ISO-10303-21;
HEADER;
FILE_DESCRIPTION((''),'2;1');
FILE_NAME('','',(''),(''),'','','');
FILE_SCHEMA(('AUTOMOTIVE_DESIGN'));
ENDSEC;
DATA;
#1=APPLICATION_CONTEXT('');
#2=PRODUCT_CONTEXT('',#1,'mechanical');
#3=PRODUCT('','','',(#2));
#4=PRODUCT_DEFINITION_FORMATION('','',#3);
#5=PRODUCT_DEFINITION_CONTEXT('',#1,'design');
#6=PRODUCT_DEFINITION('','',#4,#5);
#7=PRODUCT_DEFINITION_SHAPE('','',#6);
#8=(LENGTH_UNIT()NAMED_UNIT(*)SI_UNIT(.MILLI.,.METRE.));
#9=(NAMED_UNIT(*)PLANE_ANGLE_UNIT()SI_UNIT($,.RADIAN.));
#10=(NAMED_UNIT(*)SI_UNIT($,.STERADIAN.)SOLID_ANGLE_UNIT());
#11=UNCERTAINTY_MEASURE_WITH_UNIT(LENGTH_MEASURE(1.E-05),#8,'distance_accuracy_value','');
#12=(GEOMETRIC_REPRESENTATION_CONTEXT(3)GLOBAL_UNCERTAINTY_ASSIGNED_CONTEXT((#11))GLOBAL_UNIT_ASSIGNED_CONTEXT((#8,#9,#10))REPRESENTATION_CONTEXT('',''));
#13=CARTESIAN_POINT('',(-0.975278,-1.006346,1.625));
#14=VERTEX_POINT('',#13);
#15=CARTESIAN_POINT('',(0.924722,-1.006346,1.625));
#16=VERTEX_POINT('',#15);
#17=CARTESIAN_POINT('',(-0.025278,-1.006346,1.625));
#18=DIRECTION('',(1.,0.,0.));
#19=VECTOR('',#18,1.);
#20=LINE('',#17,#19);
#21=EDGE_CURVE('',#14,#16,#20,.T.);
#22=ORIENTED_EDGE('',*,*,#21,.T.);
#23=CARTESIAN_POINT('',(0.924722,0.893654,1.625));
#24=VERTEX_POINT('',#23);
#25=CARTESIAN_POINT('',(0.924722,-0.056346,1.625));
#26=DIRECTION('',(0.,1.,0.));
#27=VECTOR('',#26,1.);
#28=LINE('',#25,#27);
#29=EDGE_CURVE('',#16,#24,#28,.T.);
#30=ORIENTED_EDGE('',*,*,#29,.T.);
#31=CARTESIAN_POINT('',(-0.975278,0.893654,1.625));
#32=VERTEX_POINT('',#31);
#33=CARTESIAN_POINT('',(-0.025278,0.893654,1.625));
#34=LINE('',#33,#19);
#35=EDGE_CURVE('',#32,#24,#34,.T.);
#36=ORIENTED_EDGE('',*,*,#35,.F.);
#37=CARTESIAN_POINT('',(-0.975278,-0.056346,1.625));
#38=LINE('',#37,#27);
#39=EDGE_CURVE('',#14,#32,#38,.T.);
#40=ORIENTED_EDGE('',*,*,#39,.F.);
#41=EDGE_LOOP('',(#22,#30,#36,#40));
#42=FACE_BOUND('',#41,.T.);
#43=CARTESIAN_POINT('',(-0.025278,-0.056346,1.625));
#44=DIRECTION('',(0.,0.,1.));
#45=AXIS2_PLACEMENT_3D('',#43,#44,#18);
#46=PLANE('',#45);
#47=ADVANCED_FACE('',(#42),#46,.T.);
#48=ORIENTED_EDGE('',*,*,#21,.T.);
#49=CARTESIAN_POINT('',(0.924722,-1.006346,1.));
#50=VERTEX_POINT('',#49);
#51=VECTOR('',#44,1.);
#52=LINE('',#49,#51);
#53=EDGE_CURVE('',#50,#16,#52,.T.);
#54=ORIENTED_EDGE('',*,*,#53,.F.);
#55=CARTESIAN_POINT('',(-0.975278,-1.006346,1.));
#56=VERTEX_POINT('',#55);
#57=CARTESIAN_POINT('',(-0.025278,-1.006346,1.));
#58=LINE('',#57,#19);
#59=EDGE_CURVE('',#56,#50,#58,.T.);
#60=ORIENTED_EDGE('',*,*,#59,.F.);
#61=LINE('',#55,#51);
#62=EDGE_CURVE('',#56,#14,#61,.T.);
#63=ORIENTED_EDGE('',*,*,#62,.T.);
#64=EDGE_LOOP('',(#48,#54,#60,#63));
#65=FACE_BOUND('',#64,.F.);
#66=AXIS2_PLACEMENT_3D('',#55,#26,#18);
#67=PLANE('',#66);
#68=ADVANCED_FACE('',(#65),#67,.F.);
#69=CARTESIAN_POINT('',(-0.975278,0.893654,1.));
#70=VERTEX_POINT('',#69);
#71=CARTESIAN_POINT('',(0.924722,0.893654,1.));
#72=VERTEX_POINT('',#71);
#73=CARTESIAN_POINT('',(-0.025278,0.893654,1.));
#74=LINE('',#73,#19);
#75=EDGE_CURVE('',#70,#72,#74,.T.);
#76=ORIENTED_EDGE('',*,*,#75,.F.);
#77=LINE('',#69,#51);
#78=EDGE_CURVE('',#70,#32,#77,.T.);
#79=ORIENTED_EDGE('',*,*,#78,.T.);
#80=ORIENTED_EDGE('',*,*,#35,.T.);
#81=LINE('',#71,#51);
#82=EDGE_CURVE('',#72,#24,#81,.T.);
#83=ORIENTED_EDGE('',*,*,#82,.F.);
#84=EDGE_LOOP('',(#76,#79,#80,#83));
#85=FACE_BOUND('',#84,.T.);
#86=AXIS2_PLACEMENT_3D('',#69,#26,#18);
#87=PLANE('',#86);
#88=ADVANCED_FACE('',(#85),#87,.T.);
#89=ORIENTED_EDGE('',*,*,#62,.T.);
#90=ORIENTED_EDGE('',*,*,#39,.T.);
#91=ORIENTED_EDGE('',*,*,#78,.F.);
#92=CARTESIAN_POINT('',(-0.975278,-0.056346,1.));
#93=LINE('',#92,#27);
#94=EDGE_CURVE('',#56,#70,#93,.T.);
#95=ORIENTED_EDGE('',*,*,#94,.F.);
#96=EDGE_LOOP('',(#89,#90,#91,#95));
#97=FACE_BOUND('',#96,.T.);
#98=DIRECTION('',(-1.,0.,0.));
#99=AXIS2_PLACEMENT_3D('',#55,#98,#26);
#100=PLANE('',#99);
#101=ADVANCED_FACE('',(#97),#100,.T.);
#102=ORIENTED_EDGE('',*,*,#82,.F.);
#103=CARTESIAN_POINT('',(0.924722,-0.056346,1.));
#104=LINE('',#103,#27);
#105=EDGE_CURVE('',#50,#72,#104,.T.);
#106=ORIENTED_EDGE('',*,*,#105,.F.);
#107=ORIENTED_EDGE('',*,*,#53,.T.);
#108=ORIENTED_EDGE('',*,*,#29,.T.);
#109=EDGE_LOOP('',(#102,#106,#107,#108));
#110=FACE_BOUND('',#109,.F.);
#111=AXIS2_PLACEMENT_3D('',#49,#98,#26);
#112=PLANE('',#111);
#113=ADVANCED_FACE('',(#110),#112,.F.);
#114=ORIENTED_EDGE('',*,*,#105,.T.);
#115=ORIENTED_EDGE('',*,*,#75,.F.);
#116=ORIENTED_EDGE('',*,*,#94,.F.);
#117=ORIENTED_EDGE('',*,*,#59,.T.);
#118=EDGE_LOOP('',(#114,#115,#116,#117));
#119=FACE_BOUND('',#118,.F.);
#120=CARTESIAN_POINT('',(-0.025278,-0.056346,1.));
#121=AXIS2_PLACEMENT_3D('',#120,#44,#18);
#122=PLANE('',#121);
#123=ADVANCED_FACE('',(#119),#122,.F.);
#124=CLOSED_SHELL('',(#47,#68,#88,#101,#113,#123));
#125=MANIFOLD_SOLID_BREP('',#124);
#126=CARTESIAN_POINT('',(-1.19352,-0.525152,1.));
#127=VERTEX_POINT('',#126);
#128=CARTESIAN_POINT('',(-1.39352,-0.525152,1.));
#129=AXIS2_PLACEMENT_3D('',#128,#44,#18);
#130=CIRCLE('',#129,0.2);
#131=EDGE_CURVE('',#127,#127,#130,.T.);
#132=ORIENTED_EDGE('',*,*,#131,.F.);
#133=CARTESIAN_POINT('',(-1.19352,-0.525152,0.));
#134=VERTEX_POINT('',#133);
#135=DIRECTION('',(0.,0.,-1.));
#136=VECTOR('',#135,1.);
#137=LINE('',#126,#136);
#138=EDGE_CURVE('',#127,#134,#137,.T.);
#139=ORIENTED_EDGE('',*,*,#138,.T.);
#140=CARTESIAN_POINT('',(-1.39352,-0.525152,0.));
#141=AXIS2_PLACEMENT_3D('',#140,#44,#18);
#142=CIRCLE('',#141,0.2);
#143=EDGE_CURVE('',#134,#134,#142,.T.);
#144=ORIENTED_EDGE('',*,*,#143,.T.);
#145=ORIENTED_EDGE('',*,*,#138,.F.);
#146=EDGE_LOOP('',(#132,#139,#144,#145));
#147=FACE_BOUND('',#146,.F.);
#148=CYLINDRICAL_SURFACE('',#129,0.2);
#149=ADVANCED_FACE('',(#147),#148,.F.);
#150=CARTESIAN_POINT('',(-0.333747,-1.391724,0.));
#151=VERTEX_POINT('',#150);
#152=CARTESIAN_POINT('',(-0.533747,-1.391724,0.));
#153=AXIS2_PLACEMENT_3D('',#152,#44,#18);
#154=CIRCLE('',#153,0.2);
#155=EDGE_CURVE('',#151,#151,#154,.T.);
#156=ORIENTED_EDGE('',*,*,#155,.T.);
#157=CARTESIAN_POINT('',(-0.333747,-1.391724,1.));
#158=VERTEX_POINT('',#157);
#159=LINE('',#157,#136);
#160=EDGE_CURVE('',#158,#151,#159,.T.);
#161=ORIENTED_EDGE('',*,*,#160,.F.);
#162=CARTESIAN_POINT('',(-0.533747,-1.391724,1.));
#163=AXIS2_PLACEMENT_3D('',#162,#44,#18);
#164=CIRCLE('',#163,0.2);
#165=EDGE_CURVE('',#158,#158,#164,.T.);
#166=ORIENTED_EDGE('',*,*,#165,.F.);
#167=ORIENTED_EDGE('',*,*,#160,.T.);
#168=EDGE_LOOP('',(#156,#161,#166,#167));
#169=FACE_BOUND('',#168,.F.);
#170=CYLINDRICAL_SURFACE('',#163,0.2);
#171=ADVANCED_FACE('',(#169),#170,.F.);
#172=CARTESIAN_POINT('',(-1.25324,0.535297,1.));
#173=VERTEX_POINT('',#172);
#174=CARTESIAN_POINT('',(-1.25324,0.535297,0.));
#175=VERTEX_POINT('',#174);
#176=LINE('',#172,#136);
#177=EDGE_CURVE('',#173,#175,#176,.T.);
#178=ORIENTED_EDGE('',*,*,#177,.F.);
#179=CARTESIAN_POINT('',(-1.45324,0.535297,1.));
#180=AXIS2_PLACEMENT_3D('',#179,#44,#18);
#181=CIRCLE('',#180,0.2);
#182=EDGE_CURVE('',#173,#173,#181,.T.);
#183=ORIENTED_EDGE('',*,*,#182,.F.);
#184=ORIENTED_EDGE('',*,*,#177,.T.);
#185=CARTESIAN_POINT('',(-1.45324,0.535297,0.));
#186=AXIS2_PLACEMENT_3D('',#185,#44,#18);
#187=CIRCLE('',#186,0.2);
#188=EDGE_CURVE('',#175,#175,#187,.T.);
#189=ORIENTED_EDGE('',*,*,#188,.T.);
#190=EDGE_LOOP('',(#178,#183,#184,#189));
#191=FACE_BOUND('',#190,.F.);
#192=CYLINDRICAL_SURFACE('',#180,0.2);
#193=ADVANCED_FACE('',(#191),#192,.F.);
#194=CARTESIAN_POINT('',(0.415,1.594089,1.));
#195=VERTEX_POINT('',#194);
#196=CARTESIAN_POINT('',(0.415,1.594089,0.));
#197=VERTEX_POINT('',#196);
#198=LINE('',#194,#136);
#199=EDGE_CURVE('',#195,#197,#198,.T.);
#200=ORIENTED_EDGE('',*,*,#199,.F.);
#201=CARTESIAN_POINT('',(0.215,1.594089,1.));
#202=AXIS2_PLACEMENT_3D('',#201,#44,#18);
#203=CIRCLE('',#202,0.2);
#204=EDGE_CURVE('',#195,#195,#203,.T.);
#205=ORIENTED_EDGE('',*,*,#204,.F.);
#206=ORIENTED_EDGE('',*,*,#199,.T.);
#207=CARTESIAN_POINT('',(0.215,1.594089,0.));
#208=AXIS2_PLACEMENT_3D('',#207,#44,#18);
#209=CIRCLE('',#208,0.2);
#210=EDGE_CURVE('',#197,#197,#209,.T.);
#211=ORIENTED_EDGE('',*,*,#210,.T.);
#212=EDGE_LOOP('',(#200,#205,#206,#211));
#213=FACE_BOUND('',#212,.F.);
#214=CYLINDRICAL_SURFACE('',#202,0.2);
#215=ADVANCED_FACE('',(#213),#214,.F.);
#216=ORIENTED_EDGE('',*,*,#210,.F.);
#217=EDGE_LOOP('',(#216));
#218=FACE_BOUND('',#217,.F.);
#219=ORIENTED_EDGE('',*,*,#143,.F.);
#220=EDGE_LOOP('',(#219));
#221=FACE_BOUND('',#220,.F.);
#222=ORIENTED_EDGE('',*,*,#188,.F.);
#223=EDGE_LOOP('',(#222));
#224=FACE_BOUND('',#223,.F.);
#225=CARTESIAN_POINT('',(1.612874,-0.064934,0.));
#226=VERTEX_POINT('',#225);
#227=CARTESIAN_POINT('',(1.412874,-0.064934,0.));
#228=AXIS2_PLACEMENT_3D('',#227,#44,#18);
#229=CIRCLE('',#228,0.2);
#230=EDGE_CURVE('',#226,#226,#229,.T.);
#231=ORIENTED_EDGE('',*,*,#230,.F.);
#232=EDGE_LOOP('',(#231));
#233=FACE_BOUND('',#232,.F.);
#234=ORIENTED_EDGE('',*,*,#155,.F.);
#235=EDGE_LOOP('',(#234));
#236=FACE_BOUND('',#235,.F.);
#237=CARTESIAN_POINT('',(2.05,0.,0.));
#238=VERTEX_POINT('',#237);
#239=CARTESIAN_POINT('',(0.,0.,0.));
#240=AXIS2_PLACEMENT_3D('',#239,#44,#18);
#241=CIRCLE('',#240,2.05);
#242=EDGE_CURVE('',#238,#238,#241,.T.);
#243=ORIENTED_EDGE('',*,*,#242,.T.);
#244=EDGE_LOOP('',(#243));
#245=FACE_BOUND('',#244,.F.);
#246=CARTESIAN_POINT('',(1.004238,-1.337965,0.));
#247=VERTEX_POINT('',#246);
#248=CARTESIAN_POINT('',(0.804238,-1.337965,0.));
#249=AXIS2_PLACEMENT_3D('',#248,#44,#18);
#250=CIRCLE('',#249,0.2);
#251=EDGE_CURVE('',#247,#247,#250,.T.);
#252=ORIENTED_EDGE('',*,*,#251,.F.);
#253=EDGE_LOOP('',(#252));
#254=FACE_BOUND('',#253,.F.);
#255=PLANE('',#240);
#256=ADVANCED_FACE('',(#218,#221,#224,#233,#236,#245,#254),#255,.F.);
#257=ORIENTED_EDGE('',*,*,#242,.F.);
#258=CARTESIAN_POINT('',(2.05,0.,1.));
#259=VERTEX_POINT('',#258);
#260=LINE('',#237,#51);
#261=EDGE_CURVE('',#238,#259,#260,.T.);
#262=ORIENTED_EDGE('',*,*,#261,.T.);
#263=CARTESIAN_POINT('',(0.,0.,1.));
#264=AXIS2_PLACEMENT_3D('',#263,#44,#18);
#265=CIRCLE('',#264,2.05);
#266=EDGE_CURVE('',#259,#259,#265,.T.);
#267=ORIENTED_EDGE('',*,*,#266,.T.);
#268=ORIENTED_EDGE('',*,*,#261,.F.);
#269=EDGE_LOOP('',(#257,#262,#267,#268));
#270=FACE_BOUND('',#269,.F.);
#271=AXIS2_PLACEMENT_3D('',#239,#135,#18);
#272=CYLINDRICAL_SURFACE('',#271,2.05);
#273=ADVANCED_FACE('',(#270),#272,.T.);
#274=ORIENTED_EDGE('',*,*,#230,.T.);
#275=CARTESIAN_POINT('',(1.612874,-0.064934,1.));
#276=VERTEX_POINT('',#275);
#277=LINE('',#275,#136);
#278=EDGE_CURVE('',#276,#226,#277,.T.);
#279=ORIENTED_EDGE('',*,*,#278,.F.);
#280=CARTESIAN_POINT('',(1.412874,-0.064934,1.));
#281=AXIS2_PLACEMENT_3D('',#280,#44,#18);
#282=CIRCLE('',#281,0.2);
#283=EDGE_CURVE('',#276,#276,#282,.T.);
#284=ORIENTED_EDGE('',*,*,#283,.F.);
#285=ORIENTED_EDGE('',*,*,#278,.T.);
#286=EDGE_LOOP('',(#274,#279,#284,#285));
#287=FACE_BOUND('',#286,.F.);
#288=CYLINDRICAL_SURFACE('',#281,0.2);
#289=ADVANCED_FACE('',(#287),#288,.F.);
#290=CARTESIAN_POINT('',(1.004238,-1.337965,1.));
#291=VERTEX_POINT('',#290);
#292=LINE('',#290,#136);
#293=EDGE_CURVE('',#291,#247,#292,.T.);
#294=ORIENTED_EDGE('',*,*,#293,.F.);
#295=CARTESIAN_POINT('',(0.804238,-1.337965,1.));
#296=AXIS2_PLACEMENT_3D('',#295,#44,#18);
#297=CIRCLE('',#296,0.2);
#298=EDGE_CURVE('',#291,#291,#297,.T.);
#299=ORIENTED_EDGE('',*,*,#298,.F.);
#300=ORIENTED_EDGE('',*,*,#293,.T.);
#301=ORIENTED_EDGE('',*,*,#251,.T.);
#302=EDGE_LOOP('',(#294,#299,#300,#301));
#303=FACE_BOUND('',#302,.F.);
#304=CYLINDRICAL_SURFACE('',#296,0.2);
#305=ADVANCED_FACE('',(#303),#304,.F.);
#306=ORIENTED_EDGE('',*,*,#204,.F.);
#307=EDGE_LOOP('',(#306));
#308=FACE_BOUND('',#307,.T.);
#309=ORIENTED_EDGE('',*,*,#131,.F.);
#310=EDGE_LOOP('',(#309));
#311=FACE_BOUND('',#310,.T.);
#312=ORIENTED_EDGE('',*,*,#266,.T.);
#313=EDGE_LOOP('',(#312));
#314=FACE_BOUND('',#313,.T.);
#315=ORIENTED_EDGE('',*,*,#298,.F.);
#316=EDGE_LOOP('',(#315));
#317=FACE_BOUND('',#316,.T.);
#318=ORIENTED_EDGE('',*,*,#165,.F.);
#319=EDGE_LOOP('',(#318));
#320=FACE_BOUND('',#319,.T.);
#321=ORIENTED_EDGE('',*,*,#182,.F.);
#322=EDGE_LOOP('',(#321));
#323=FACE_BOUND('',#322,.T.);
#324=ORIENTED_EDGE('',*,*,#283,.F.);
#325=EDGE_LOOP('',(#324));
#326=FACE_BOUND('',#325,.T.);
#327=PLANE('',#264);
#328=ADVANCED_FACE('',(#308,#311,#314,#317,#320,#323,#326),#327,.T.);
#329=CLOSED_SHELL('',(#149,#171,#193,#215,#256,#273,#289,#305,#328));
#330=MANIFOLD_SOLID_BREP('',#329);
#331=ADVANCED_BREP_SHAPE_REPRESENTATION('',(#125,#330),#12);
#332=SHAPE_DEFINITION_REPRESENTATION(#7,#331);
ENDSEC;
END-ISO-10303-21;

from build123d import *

# Parameters (mm, degrees)
F0_R     = 2.05
F1_DEPTH = 1
F2_W     = 1.9
F2_H     = 1.9
F3_DEPTH = 0.625
F4_R     = 0.2
F5_DEPTH = 1.001


# Not quite as in the source:
# - a feature of the source that left no trace in its solid (it failed there, or was rolled back) is left out


with BuildPart() as f1:
    # F0 (on Top) → F1 (new body)
    with BuildSketch(Plane.XY):
        Circle(F0_R)
    extrude(amount=F1_DEPTH)

    # F4 (on face) → F5 (cut, through all)
    with BuildSketch(Plane.XY.offset(1)):
        with Locations((-1.3935204645, -0.5251522966)):
            Circle(F4_R)
        with Locations((-1.4532401648, 0.5352973713)):
            Circle(F4_R)
        with Locations((1.4128740877, -0.0649337453)):
            Circle(F4_R)
        with Locations((0.8042382542, -1.3379652519)):
            Circle(F4_R)
        with Locations((-0.5337471957, -1.3917236356)):
            Circle(F4_R)
        with Locations((0.2150003766, 1.5940891608)):
            Circle(F4_R)
    extrude(amount=-F5_DEPTH, mode=Mode.SUBTRACT)


with BuildPart() as f3:
    # F2 (on face) → F3 (new body)
    with BuildSketch(Plane.XY.offset(1)):
        with Locations((-0.0252776808, -0.0563459136)):
            Rectangle(F2_W, F2_H)
    extrude(amount=F3_DEPTH)


solid = Compound([f1.part, f3.part])
